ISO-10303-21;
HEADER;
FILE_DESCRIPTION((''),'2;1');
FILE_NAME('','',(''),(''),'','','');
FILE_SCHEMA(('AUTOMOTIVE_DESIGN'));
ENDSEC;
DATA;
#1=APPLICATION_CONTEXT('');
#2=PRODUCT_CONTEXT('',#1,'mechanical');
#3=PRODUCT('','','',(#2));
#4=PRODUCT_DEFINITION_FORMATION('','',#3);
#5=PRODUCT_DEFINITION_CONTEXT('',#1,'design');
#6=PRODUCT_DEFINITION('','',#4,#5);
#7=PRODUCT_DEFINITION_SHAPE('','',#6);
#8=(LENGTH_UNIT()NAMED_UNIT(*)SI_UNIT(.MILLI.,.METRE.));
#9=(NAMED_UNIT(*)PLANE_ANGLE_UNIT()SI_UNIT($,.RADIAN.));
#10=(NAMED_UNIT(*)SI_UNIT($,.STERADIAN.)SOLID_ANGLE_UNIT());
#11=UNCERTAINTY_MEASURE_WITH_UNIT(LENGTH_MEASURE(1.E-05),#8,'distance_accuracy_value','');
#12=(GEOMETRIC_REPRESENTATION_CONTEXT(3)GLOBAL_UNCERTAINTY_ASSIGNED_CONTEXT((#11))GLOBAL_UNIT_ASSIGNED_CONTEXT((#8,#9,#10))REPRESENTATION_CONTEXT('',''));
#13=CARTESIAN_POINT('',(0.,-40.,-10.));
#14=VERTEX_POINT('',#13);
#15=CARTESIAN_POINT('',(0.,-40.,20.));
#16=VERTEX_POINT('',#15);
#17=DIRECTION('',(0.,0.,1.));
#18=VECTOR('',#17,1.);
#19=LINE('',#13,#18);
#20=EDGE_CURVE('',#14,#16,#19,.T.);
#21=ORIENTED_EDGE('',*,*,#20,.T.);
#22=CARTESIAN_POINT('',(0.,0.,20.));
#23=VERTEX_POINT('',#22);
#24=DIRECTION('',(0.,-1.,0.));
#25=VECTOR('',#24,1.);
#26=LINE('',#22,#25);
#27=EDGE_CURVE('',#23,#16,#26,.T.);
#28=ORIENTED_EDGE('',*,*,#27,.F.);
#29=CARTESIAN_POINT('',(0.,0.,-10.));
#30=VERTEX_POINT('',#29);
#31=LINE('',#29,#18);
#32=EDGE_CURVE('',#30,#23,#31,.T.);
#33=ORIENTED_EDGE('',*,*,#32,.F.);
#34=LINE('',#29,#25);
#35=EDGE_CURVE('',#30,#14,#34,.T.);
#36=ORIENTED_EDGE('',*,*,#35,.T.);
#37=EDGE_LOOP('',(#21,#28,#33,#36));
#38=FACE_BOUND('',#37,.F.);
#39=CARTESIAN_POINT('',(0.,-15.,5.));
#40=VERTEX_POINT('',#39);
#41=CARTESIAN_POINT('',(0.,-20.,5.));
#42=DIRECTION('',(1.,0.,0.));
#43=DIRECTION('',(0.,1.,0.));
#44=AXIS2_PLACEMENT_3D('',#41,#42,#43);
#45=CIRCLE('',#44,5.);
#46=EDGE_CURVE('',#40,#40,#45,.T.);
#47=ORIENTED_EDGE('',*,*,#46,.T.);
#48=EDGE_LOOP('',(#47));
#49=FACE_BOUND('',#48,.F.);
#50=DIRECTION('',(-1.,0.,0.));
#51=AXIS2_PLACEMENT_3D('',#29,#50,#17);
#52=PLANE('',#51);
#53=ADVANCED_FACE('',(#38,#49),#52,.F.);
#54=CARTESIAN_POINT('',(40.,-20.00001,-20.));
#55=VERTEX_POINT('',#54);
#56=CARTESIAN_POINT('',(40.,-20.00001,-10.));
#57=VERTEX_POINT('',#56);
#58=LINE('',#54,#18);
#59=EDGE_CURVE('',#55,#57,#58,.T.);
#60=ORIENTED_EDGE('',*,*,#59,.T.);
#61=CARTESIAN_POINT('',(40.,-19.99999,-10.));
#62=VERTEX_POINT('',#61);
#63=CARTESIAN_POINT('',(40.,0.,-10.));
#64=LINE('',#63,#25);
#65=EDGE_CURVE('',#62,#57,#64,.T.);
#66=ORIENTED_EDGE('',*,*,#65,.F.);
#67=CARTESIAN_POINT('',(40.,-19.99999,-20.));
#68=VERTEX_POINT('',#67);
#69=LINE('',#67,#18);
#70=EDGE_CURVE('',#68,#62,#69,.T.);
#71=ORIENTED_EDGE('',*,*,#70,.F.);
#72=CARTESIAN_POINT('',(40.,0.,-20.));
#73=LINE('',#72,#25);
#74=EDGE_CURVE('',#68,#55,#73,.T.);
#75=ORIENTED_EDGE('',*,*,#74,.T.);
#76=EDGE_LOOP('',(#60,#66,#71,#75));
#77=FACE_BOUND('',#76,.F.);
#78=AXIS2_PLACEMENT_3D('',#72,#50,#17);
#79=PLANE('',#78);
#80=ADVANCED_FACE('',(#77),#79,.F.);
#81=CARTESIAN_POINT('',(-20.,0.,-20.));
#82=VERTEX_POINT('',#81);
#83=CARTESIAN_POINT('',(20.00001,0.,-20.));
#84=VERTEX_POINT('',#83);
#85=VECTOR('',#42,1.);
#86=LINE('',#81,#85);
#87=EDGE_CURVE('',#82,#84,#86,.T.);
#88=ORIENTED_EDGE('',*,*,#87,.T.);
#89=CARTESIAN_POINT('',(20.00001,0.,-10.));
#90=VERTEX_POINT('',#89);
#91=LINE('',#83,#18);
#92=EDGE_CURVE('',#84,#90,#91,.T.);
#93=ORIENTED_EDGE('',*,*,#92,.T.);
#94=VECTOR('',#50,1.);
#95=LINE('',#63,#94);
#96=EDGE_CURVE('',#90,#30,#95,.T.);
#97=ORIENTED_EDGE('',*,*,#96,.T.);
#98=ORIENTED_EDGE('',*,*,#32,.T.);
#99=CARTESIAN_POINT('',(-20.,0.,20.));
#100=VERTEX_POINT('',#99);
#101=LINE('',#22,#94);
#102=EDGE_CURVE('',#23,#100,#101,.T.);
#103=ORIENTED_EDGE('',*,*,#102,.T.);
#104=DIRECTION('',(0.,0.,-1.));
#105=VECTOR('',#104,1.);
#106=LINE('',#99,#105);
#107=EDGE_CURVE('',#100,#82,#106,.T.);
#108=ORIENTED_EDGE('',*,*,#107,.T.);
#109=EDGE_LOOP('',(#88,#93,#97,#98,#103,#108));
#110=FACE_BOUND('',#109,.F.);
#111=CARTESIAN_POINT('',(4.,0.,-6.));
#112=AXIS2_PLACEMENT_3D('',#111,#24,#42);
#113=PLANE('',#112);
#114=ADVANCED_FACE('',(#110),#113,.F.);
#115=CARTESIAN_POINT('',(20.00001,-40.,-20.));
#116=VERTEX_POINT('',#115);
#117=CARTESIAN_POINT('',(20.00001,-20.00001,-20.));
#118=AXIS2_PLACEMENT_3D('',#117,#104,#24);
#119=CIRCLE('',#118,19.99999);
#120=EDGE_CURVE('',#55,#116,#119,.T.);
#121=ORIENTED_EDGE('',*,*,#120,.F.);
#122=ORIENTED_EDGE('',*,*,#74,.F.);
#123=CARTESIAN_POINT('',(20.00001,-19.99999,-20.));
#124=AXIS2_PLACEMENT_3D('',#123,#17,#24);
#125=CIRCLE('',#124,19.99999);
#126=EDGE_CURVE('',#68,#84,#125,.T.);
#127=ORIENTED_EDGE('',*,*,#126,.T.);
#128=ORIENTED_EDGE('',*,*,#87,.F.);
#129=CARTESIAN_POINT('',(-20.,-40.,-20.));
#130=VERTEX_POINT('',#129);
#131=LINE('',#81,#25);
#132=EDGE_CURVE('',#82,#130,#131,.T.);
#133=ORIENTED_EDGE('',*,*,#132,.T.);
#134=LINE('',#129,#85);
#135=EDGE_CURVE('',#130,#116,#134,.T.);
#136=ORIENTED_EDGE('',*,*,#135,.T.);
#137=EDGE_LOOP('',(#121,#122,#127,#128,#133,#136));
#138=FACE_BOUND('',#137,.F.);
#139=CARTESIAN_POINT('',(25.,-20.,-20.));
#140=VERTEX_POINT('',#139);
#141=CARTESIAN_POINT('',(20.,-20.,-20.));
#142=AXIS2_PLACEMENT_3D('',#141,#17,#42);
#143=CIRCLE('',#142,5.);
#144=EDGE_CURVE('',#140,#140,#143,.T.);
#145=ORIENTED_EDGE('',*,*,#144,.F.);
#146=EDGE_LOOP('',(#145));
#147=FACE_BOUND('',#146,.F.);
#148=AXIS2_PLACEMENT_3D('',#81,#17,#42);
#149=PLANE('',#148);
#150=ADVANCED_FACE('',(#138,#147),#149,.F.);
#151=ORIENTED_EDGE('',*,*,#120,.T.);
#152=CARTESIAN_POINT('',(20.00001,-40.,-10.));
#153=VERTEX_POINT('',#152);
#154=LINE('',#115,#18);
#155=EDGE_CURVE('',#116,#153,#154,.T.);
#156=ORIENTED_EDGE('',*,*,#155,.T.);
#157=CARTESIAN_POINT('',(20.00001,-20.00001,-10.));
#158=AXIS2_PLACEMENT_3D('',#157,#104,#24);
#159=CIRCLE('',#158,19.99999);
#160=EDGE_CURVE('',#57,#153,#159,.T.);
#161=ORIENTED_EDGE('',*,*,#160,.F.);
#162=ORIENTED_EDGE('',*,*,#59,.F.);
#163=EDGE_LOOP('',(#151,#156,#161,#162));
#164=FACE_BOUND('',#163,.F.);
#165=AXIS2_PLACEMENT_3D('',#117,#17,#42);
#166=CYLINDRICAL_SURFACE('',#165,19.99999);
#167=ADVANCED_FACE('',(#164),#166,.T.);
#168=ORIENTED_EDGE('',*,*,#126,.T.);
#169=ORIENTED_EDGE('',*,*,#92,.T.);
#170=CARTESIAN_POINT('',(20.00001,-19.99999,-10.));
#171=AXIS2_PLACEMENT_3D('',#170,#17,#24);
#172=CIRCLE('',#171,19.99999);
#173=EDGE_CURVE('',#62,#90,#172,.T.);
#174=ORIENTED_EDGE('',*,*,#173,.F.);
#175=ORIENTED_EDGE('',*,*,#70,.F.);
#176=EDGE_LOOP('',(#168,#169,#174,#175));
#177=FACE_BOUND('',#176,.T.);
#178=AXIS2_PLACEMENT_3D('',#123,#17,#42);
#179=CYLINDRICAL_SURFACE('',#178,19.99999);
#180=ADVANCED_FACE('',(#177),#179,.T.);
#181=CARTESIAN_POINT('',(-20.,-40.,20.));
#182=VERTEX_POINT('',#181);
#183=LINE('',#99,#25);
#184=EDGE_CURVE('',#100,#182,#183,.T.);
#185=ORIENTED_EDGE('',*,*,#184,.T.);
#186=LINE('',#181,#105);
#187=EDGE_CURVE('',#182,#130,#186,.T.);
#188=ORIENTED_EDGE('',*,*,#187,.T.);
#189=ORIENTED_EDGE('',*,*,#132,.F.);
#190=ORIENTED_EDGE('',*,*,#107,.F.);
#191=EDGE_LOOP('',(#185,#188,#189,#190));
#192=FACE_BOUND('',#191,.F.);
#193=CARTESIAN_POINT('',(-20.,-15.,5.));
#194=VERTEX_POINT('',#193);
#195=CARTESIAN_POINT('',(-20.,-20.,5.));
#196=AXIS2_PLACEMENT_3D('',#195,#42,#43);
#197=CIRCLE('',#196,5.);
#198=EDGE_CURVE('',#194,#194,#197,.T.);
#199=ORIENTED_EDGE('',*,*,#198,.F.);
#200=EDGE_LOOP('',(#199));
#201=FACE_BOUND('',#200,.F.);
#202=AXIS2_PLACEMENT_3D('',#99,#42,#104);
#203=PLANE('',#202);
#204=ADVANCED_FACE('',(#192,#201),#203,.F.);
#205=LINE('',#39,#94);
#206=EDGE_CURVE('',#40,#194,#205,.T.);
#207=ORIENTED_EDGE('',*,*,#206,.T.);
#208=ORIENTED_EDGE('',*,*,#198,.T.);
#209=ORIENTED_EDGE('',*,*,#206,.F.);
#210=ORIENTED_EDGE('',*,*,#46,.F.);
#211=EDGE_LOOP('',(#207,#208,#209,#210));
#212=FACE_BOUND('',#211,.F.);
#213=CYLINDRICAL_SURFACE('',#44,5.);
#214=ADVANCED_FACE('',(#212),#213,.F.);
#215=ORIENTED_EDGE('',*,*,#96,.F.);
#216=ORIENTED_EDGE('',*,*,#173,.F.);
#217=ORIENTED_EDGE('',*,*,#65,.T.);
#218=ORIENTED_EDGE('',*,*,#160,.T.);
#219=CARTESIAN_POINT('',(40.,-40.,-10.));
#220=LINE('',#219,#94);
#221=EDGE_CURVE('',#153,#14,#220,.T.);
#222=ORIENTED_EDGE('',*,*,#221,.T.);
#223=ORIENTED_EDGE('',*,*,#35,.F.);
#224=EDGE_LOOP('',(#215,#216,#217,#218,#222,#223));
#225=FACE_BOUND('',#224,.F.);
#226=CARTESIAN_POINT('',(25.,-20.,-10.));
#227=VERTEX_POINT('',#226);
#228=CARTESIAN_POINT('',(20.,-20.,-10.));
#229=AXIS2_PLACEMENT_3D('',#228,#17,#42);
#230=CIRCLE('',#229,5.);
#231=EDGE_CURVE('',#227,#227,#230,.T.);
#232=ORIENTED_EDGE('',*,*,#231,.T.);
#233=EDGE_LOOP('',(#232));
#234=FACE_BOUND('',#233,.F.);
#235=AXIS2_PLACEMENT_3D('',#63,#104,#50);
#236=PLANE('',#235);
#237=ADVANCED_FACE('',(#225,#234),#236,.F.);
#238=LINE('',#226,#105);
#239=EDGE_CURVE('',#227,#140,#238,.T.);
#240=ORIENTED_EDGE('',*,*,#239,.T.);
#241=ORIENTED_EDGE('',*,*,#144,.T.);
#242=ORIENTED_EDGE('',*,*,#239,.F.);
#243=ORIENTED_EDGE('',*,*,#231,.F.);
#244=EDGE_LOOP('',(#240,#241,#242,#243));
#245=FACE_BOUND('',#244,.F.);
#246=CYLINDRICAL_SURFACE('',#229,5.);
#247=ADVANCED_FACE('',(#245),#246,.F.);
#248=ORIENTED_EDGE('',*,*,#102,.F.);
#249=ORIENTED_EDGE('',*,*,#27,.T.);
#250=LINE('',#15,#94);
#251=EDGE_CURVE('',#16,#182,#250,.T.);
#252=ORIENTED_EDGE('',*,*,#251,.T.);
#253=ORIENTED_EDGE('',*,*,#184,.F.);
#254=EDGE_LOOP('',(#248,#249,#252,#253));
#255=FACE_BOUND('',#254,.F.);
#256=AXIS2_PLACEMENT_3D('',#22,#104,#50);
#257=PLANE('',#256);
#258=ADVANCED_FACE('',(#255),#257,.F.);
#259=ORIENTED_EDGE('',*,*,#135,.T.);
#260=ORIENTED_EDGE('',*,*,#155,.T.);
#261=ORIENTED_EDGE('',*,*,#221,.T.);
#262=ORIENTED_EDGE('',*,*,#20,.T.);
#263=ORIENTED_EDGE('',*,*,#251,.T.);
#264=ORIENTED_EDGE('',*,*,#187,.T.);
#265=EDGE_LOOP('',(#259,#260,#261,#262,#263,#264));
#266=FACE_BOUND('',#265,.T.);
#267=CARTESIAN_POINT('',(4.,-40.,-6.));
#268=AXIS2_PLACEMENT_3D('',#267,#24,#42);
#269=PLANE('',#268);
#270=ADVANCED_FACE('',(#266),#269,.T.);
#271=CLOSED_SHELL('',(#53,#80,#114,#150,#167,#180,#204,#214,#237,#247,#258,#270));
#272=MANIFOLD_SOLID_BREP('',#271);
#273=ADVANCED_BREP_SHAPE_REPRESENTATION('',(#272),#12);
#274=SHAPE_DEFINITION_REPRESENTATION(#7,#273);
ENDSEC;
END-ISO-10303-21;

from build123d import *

# Parameters (mm, degrees)
F1_DEPTH = 40
F2_R     = 19.99999
F3_R     = 5
F4_DEPTH = 25
F5_R     = 5
F6_DEPTH = 25


# Not quite as in the source:
# - a fillet or chamfer is up to 0.001 mm smaller than in the source, because OpenCascade refuses the exact size


with BuildPart() as f1:
    # F0 (on Front) → F1 (new body)
    with BuildSketch(Plane.XZ):
        Polygon((0, -10), (0, 0), (0, 20), (-20, 20), (-20, -20), (0, -20), (40, -20), (40, -10), align=None)
    extrude(amount=F1_DEPTH)

    # F2 (radius 20 in the source; OpenCascade refuses exactly that, so slightly less here)
    f2_edges = [f1.edges().sort_by_distance(p)[0] for p in [
        (40, -40, -15),
        (40, 0, -15),
    ]]
    fillet(f2_edges, radius=F2_R)

    # F3 (on face) → F4 (cut)
    with BuildSketch(Plane.XY.offset(-10)):
        with Locations((20, -20)):
            Circle(F3_R)
    extrude(amount=-F4_DEPTH, mode=Mode.SUBTRACT)

    # F5 (on face) → F6 (cut)
    with BuildSketch(Plane.YZ):
        with Locations((-20, 5)):
            Circle(F5_R)
    extrude(amount=-F6_DEPTH, mode=Mode.SUBTRACT)


solid = f1.part
